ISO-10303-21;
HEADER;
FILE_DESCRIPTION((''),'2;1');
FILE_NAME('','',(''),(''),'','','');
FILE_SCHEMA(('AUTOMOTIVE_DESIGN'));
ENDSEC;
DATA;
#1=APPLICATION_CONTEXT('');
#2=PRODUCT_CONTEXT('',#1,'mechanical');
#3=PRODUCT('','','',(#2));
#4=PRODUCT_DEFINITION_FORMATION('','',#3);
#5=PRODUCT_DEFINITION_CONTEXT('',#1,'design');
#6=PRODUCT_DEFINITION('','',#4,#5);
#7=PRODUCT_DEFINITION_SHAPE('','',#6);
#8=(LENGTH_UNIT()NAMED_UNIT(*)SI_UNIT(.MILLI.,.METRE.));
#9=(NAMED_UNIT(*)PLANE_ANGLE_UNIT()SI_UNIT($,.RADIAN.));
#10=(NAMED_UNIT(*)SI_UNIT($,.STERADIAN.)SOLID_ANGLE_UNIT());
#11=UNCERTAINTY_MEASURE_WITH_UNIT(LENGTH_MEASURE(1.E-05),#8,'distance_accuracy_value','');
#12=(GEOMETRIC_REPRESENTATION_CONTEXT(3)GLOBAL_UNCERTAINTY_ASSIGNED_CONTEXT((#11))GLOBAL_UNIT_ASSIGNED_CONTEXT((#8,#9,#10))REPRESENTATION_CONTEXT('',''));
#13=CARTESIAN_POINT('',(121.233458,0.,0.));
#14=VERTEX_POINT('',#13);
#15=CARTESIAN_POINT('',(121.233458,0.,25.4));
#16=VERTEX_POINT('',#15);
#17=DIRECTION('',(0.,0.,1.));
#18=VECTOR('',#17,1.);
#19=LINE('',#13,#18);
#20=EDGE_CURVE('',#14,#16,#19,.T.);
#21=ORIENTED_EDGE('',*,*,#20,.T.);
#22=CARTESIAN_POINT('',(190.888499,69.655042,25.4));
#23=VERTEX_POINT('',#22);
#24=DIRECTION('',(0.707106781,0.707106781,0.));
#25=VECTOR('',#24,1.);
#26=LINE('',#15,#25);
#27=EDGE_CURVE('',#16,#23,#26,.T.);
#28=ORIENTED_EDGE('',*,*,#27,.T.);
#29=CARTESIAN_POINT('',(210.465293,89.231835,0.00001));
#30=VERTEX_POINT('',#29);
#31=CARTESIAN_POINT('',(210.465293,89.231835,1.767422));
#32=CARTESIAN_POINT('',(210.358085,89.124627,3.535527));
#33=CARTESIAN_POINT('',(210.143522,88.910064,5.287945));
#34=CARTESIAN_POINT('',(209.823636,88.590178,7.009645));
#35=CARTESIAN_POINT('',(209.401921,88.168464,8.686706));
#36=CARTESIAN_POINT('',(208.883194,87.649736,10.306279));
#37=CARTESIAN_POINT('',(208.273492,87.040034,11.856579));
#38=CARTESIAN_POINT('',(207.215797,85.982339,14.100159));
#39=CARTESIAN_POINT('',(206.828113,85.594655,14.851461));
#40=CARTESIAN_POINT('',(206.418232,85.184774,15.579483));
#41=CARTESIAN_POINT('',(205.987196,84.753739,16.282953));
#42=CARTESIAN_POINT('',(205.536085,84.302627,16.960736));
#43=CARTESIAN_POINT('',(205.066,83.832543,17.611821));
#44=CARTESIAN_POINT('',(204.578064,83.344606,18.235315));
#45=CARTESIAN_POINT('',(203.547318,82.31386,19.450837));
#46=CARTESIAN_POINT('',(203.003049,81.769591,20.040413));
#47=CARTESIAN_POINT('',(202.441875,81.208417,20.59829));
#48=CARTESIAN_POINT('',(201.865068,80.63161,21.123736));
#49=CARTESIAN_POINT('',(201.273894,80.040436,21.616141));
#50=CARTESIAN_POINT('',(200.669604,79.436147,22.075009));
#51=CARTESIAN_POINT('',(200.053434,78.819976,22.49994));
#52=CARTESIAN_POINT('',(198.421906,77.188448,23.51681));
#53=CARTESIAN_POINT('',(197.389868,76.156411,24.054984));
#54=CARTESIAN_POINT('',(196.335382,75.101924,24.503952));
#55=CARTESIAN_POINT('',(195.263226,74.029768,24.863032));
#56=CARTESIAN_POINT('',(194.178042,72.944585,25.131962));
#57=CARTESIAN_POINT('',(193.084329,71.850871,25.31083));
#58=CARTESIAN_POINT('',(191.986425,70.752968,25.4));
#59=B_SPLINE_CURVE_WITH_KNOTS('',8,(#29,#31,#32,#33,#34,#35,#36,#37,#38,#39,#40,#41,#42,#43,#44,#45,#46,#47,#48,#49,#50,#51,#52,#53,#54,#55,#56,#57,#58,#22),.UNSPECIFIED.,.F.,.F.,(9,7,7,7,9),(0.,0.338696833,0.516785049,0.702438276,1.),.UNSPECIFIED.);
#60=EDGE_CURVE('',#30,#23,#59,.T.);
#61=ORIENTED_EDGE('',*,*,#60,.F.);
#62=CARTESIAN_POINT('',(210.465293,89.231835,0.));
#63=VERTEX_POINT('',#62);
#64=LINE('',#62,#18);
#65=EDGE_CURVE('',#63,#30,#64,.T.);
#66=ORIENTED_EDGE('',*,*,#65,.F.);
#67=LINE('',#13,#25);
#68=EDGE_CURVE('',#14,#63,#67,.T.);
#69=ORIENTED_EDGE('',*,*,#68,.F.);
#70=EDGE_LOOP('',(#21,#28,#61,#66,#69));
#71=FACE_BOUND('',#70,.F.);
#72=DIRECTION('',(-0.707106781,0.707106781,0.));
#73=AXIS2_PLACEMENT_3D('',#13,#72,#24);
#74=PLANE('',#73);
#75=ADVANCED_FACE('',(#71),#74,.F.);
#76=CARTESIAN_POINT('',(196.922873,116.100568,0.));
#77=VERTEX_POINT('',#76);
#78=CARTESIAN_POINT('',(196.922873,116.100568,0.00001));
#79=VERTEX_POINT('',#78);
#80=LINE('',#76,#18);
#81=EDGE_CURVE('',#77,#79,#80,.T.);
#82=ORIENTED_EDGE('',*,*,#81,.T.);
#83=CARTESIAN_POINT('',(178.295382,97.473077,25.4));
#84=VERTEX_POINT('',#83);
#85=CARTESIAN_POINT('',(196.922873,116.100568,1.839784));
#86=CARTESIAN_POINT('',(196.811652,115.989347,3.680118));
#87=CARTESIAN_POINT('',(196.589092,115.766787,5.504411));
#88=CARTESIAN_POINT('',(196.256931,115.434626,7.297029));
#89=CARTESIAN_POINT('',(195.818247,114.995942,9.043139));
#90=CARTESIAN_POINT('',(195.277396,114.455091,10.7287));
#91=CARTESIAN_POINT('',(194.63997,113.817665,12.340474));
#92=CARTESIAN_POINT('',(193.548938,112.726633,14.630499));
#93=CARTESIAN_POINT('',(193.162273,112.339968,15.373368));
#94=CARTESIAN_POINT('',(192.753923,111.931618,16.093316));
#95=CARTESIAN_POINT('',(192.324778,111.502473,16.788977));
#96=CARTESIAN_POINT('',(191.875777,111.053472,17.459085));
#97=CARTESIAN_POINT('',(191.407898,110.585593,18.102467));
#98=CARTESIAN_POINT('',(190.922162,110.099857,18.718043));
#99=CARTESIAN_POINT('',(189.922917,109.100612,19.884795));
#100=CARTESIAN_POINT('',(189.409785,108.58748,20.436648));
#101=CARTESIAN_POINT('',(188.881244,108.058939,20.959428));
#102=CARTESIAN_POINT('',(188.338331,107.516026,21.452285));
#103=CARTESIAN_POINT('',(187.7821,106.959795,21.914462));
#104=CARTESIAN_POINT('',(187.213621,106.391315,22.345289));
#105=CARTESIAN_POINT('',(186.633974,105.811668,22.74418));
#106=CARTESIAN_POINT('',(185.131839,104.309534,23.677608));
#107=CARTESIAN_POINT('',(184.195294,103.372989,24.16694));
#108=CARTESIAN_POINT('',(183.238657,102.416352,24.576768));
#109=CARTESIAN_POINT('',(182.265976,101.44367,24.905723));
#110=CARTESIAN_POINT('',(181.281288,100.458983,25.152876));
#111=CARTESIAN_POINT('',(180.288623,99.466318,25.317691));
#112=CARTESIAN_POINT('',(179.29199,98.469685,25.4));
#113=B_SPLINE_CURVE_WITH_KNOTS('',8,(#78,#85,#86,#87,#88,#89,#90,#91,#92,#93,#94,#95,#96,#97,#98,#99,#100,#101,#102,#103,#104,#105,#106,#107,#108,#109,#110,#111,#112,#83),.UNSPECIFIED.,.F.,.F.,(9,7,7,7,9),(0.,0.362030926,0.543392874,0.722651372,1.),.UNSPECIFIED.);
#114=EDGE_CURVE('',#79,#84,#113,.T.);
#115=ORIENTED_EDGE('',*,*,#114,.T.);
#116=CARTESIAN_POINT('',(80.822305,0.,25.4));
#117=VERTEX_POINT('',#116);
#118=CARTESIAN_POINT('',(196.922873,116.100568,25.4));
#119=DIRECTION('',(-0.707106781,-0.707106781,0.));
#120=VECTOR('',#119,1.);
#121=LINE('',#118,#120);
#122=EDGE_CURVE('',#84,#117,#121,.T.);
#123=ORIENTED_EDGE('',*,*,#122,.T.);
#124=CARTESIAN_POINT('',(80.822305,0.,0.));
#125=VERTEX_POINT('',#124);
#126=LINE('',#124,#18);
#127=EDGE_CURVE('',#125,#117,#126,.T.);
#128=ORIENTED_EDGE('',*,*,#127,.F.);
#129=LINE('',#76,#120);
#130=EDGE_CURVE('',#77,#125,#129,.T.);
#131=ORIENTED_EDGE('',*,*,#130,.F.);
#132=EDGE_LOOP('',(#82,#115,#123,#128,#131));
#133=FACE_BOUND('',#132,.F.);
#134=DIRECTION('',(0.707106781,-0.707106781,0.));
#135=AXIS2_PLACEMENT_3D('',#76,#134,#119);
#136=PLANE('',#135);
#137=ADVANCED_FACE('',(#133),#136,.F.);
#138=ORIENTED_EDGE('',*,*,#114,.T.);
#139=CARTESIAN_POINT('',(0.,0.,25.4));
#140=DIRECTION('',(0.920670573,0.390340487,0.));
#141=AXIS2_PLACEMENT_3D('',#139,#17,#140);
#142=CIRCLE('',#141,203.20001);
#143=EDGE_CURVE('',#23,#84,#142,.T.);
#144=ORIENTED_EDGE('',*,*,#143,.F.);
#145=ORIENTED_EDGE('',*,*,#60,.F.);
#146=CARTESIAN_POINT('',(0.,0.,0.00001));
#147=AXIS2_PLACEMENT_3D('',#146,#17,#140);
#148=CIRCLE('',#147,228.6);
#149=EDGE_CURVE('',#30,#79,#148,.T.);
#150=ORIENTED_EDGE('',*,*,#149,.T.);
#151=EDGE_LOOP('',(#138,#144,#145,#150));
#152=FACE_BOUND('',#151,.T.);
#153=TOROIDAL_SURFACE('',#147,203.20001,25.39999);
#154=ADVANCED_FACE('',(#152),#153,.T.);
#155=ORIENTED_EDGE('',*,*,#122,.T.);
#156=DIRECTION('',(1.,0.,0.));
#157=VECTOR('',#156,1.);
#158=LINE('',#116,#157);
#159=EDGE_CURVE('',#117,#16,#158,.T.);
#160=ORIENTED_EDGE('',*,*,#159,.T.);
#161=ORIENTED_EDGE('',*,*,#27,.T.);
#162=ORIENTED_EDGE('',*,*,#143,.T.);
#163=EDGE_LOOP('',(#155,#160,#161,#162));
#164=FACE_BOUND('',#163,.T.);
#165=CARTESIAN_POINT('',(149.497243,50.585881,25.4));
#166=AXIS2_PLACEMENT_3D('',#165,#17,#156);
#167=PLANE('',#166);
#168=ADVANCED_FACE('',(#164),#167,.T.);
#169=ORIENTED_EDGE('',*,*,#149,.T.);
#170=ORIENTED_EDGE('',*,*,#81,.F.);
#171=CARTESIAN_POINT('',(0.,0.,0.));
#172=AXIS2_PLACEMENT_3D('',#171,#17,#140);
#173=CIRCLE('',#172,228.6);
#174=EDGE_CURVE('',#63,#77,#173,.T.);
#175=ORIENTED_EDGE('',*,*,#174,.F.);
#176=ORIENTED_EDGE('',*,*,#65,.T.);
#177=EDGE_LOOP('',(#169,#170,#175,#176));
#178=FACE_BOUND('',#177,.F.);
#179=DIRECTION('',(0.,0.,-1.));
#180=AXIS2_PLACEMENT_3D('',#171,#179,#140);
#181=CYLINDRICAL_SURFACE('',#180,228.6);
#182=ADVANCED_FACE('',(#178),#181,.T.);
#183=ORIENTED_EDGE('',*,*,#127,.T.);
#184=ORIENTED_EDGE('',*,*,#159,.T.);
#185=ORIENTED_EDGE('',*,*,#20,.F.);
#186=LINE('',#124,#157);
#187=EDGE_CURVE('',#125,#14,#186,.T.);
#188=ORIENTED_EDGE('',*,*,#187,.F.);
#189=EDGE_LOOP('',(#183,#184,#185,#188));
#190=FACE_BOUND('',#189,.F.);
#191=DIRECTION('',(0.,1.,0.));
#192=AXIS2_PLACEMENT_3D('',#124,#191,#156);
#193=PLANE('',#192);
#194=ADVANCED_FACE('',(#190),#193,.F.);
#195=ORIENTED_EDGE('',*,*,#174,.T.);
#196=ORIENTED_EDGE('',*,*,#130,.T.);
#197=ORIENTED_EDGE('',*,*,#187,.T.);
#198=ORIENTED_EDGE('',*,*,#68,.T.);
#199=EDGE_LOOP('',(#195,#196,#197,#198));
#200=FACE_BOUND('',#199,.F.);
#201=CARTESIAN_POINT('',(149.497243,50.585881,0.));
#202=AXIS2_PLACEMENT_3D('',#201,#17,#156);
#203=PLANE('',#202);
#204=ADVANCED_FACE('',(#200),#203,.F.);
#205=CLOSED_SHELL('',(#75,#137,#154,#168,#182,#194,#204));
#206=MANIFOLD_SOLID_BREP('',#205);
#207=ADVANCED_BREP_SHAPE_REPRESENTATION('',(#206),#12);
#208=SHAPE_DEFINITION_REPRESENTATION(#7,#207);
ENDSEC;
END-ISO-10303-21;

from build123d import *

# Parameters (mm, degrees)
F2_DEPTH = 25.4
F3_R     = 25.39999


# Not quite as in the source:
# - a fillet or chamfer is up to 0.001 mm smaller than in the source, because OpenCascade refuses the exact size


with BuildPart() as f2:
    # F1 (on face) → F2 (new body)
    with BuildSketch(Plane.XY):
        with BuildLine():
            Line((196.9228733519, 116.1005682623), (80.8223050896, 0))
            Line((80.8223050896, 0), (121.2334576344, 0))
            Line((121.2334576344, 0), (210.4652929995, 89.2318353651))
            ThreePointArc((210.4652929995, 89.2318353651), (204.1366251379, 102.889252487), (196.9228733519, 116.1005682623))
        make_face()
    extrude(amount=F2_DEPTH)

    # F3 (radius 25.4 in the source; OpenCascade refuses exactly that, so slightly less here)
    f3_edges = [f2.edges().sort_by_distance(p)[0] for p in [
        (204.136625, 102.889252, 25.4),
    ]]
    fillet(f3_edges, radius=F3_R)


solid = f2.part
